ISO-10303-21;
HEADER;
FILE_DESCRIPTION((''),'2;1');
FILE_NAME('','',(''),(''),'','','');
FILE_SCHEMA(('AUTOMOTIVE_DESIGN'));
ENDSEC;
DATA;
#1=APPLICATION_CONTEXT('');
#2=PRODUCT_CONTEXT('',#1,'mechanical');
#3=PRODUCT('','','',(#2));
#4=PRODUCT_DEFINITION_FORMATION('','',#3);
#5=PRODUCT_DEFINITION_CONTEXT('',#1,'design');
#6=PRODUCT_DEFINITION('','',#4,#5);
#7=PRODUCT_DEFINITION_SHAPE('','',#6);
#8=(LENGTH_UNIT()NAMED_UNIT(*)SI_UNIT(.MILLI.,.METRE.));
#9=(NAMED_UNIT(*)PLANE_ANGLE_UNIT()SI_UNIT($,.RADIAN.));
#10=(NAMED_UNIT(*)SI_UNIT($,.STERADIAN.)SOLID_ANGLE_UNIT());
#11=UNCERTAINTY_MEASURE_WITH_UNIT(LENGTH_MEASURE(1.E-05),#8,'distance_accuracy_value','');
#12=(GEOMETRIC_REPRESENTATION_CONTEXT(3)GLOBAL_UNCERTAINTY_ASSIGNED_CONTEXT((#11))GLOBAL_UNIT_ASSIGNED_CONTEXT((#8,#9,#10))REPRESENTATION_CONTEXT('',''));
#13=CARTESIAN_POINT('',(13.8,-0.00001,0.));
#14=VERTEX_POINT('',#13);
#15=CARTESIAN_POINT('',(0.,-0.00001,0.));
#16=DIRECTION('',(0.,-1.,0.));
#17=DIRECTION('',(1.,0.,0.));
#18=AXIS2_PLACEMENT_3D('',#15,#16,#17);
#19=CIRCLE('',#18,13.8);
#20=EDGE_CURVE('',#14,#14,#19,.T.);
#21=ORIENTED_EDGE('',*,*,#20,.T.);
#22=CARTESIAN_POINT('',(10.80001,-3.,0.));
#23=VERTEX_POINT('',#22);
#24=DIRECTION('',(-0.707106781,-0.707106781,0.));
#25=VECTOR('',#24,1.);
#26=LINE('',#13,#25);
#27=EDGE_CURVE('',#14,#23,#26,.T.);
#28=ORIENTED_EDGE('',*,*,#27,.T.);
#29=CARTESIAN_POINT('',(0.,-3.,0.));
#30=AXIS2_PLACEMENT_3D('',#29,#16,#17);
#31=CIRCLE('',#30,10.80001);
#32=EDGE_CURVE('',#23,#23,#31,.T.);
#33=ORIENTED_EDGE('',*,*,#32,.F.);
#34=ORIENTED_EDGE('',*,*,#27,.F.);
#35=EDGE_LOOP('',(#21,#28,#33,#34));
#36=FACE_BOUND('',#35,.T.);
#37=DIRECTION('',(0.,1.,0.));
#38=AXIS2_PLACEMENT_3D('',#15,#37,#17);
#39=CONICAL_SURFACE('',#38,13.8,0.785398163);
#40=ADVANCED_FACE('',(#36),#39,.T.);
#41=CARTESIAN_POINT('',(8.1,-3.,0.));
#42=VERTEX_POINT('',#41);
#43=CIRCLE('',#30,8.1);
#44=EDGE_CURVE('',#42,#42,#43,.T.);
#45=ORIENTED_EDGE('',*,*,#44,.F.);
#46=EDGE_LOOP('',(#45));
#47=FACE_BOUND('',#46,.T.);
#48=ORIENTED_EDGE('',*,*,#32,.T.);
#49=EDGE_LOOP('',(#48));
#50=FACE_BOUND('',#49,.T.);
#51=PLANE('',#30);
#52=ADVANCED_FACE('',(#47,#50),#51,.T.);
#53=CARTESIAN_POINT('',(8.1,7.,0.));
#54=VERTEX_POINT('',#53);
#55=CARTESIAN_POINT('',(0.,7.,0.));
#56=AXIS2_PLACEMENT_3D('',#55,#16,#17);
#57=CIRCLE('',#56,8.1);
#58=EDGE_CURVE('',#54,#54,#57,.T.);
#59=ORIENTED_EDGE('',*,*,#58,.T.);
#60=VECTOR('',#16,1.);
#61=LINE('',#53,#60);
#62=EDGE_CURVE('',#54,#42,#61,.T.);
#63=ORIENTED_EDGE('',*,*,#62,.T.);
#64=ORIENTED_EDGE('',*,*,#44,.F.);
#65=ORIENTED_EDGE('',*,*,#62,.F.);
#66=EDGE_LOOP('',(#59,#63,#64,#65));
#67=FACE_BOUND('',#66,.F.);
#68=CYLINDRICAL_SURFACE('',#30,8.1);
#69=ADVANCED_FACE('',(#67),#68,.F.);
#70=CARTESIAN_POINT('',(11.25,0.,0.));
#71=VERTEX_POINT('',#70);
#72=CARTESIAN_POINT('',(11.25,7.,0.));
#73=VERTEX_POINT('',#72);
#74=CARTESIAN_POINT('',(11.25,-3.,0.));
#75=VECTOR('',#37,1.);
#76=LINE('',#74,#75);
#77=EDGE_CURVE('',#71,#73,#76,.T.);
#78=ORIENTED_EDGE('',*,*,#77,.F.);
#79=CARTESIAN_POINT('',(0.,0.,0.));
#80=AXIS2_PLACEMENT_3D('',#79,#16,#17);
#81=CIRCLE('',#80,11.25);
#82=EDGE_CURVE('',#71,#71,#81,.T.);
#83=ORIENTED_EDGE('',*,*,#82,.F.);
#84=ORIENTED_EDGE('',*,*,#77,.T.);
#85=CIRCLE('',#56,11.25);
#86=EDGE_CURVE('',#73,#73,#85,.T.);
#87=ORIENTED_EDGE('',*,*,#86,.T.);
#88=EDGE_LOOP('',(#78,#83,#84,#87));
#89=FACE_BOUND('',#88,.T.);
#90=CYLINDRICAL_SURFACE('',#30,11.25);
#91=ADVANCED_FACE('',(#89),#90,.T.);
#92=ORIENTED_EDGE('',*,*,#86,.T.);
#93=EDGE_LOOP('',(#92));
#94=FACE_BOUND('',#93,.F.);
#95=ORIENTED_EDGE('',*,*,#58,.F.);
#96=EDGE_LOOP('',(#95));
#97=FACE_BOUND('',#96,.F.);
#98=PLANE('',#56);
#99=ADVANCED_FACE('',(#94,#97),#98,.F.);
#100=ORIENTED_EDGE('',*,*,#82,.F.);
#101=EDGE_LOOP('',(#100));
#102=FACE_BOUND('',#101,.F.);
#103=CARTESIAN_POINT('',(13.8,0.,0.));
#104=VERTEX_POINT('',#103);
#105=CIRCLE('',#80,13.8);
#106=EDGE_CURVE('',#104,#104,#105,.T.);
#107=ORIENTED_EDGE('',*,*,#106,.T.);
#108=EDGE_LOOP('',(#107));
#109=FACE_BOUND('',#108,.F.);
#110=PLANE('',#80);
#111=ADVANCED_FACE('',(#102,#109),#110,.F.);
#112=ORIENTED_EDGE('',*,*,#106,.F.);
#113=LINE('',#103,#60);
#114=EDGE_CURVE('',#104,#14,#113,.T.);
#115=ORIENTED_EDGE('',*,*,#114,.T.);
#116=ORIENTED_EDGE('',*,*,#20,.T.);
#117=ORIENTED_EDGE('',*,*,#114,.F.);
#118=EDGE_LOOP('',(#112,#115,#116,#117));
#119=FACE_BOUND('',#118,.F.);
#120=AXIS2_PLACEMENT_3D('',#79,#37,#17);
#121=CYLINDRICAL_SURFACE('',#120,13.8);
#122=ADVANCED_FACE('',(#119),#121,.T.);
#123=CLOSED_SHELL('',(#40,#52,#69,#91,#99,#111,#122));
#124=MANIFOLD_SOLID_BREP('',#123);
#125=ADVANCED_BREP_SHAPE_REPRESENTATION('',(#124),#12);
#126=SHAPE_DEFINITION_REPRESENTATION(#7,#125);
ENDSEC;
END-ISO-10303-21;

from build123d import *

# Parameters (mm, degrees)
F0_R     = 13.8
F1_DEPTH = 3
F2_R     = 8.1
F3_DEPTH = 25
F2_R_2   = 11.25
F4_DEPTH = 10
F5_SIZE  = 2.99999


# Not quite as in the source:
# - a fillet or chamfer is up to 0.001 mm smaller than in the source, because OpenCascade refuses the exact size


with BuildPart() as f1:
    # F0 (on Front) → F1 (new body)
    with BuildSketch(Plane.XZ):
        Circle(F0_R)
    extrude(amount=F1_DEPTH)

    # F2 (on face) → F3 (cut)
    with BuildSketch(Plane.XZ.offset(3)):
        Circle(F2_R)
    extrude(amount=-F3_DEPTH, mode=Mode.SUBTRACT)

    # F2 (on face) → F4 (join)
    with BuildSketch(Plane.XZ.offset(3)):
        Circle(F2_R_2)
        Circle(F2_R, mode=Mode.SUBTRACT)
    extrude(amount=-F4_DEPTH)

    # F5 (size 3 in the source; OpenCascade refuses exactly that, so slightly less here)
    f5_edges = [f1.edges().sort_by_distance(p)[0] for p in [
        (-13.8, -3, 0),
    ]]
    chamfer(f5_edges, length=F5_SIZE)


solid = f1.part
